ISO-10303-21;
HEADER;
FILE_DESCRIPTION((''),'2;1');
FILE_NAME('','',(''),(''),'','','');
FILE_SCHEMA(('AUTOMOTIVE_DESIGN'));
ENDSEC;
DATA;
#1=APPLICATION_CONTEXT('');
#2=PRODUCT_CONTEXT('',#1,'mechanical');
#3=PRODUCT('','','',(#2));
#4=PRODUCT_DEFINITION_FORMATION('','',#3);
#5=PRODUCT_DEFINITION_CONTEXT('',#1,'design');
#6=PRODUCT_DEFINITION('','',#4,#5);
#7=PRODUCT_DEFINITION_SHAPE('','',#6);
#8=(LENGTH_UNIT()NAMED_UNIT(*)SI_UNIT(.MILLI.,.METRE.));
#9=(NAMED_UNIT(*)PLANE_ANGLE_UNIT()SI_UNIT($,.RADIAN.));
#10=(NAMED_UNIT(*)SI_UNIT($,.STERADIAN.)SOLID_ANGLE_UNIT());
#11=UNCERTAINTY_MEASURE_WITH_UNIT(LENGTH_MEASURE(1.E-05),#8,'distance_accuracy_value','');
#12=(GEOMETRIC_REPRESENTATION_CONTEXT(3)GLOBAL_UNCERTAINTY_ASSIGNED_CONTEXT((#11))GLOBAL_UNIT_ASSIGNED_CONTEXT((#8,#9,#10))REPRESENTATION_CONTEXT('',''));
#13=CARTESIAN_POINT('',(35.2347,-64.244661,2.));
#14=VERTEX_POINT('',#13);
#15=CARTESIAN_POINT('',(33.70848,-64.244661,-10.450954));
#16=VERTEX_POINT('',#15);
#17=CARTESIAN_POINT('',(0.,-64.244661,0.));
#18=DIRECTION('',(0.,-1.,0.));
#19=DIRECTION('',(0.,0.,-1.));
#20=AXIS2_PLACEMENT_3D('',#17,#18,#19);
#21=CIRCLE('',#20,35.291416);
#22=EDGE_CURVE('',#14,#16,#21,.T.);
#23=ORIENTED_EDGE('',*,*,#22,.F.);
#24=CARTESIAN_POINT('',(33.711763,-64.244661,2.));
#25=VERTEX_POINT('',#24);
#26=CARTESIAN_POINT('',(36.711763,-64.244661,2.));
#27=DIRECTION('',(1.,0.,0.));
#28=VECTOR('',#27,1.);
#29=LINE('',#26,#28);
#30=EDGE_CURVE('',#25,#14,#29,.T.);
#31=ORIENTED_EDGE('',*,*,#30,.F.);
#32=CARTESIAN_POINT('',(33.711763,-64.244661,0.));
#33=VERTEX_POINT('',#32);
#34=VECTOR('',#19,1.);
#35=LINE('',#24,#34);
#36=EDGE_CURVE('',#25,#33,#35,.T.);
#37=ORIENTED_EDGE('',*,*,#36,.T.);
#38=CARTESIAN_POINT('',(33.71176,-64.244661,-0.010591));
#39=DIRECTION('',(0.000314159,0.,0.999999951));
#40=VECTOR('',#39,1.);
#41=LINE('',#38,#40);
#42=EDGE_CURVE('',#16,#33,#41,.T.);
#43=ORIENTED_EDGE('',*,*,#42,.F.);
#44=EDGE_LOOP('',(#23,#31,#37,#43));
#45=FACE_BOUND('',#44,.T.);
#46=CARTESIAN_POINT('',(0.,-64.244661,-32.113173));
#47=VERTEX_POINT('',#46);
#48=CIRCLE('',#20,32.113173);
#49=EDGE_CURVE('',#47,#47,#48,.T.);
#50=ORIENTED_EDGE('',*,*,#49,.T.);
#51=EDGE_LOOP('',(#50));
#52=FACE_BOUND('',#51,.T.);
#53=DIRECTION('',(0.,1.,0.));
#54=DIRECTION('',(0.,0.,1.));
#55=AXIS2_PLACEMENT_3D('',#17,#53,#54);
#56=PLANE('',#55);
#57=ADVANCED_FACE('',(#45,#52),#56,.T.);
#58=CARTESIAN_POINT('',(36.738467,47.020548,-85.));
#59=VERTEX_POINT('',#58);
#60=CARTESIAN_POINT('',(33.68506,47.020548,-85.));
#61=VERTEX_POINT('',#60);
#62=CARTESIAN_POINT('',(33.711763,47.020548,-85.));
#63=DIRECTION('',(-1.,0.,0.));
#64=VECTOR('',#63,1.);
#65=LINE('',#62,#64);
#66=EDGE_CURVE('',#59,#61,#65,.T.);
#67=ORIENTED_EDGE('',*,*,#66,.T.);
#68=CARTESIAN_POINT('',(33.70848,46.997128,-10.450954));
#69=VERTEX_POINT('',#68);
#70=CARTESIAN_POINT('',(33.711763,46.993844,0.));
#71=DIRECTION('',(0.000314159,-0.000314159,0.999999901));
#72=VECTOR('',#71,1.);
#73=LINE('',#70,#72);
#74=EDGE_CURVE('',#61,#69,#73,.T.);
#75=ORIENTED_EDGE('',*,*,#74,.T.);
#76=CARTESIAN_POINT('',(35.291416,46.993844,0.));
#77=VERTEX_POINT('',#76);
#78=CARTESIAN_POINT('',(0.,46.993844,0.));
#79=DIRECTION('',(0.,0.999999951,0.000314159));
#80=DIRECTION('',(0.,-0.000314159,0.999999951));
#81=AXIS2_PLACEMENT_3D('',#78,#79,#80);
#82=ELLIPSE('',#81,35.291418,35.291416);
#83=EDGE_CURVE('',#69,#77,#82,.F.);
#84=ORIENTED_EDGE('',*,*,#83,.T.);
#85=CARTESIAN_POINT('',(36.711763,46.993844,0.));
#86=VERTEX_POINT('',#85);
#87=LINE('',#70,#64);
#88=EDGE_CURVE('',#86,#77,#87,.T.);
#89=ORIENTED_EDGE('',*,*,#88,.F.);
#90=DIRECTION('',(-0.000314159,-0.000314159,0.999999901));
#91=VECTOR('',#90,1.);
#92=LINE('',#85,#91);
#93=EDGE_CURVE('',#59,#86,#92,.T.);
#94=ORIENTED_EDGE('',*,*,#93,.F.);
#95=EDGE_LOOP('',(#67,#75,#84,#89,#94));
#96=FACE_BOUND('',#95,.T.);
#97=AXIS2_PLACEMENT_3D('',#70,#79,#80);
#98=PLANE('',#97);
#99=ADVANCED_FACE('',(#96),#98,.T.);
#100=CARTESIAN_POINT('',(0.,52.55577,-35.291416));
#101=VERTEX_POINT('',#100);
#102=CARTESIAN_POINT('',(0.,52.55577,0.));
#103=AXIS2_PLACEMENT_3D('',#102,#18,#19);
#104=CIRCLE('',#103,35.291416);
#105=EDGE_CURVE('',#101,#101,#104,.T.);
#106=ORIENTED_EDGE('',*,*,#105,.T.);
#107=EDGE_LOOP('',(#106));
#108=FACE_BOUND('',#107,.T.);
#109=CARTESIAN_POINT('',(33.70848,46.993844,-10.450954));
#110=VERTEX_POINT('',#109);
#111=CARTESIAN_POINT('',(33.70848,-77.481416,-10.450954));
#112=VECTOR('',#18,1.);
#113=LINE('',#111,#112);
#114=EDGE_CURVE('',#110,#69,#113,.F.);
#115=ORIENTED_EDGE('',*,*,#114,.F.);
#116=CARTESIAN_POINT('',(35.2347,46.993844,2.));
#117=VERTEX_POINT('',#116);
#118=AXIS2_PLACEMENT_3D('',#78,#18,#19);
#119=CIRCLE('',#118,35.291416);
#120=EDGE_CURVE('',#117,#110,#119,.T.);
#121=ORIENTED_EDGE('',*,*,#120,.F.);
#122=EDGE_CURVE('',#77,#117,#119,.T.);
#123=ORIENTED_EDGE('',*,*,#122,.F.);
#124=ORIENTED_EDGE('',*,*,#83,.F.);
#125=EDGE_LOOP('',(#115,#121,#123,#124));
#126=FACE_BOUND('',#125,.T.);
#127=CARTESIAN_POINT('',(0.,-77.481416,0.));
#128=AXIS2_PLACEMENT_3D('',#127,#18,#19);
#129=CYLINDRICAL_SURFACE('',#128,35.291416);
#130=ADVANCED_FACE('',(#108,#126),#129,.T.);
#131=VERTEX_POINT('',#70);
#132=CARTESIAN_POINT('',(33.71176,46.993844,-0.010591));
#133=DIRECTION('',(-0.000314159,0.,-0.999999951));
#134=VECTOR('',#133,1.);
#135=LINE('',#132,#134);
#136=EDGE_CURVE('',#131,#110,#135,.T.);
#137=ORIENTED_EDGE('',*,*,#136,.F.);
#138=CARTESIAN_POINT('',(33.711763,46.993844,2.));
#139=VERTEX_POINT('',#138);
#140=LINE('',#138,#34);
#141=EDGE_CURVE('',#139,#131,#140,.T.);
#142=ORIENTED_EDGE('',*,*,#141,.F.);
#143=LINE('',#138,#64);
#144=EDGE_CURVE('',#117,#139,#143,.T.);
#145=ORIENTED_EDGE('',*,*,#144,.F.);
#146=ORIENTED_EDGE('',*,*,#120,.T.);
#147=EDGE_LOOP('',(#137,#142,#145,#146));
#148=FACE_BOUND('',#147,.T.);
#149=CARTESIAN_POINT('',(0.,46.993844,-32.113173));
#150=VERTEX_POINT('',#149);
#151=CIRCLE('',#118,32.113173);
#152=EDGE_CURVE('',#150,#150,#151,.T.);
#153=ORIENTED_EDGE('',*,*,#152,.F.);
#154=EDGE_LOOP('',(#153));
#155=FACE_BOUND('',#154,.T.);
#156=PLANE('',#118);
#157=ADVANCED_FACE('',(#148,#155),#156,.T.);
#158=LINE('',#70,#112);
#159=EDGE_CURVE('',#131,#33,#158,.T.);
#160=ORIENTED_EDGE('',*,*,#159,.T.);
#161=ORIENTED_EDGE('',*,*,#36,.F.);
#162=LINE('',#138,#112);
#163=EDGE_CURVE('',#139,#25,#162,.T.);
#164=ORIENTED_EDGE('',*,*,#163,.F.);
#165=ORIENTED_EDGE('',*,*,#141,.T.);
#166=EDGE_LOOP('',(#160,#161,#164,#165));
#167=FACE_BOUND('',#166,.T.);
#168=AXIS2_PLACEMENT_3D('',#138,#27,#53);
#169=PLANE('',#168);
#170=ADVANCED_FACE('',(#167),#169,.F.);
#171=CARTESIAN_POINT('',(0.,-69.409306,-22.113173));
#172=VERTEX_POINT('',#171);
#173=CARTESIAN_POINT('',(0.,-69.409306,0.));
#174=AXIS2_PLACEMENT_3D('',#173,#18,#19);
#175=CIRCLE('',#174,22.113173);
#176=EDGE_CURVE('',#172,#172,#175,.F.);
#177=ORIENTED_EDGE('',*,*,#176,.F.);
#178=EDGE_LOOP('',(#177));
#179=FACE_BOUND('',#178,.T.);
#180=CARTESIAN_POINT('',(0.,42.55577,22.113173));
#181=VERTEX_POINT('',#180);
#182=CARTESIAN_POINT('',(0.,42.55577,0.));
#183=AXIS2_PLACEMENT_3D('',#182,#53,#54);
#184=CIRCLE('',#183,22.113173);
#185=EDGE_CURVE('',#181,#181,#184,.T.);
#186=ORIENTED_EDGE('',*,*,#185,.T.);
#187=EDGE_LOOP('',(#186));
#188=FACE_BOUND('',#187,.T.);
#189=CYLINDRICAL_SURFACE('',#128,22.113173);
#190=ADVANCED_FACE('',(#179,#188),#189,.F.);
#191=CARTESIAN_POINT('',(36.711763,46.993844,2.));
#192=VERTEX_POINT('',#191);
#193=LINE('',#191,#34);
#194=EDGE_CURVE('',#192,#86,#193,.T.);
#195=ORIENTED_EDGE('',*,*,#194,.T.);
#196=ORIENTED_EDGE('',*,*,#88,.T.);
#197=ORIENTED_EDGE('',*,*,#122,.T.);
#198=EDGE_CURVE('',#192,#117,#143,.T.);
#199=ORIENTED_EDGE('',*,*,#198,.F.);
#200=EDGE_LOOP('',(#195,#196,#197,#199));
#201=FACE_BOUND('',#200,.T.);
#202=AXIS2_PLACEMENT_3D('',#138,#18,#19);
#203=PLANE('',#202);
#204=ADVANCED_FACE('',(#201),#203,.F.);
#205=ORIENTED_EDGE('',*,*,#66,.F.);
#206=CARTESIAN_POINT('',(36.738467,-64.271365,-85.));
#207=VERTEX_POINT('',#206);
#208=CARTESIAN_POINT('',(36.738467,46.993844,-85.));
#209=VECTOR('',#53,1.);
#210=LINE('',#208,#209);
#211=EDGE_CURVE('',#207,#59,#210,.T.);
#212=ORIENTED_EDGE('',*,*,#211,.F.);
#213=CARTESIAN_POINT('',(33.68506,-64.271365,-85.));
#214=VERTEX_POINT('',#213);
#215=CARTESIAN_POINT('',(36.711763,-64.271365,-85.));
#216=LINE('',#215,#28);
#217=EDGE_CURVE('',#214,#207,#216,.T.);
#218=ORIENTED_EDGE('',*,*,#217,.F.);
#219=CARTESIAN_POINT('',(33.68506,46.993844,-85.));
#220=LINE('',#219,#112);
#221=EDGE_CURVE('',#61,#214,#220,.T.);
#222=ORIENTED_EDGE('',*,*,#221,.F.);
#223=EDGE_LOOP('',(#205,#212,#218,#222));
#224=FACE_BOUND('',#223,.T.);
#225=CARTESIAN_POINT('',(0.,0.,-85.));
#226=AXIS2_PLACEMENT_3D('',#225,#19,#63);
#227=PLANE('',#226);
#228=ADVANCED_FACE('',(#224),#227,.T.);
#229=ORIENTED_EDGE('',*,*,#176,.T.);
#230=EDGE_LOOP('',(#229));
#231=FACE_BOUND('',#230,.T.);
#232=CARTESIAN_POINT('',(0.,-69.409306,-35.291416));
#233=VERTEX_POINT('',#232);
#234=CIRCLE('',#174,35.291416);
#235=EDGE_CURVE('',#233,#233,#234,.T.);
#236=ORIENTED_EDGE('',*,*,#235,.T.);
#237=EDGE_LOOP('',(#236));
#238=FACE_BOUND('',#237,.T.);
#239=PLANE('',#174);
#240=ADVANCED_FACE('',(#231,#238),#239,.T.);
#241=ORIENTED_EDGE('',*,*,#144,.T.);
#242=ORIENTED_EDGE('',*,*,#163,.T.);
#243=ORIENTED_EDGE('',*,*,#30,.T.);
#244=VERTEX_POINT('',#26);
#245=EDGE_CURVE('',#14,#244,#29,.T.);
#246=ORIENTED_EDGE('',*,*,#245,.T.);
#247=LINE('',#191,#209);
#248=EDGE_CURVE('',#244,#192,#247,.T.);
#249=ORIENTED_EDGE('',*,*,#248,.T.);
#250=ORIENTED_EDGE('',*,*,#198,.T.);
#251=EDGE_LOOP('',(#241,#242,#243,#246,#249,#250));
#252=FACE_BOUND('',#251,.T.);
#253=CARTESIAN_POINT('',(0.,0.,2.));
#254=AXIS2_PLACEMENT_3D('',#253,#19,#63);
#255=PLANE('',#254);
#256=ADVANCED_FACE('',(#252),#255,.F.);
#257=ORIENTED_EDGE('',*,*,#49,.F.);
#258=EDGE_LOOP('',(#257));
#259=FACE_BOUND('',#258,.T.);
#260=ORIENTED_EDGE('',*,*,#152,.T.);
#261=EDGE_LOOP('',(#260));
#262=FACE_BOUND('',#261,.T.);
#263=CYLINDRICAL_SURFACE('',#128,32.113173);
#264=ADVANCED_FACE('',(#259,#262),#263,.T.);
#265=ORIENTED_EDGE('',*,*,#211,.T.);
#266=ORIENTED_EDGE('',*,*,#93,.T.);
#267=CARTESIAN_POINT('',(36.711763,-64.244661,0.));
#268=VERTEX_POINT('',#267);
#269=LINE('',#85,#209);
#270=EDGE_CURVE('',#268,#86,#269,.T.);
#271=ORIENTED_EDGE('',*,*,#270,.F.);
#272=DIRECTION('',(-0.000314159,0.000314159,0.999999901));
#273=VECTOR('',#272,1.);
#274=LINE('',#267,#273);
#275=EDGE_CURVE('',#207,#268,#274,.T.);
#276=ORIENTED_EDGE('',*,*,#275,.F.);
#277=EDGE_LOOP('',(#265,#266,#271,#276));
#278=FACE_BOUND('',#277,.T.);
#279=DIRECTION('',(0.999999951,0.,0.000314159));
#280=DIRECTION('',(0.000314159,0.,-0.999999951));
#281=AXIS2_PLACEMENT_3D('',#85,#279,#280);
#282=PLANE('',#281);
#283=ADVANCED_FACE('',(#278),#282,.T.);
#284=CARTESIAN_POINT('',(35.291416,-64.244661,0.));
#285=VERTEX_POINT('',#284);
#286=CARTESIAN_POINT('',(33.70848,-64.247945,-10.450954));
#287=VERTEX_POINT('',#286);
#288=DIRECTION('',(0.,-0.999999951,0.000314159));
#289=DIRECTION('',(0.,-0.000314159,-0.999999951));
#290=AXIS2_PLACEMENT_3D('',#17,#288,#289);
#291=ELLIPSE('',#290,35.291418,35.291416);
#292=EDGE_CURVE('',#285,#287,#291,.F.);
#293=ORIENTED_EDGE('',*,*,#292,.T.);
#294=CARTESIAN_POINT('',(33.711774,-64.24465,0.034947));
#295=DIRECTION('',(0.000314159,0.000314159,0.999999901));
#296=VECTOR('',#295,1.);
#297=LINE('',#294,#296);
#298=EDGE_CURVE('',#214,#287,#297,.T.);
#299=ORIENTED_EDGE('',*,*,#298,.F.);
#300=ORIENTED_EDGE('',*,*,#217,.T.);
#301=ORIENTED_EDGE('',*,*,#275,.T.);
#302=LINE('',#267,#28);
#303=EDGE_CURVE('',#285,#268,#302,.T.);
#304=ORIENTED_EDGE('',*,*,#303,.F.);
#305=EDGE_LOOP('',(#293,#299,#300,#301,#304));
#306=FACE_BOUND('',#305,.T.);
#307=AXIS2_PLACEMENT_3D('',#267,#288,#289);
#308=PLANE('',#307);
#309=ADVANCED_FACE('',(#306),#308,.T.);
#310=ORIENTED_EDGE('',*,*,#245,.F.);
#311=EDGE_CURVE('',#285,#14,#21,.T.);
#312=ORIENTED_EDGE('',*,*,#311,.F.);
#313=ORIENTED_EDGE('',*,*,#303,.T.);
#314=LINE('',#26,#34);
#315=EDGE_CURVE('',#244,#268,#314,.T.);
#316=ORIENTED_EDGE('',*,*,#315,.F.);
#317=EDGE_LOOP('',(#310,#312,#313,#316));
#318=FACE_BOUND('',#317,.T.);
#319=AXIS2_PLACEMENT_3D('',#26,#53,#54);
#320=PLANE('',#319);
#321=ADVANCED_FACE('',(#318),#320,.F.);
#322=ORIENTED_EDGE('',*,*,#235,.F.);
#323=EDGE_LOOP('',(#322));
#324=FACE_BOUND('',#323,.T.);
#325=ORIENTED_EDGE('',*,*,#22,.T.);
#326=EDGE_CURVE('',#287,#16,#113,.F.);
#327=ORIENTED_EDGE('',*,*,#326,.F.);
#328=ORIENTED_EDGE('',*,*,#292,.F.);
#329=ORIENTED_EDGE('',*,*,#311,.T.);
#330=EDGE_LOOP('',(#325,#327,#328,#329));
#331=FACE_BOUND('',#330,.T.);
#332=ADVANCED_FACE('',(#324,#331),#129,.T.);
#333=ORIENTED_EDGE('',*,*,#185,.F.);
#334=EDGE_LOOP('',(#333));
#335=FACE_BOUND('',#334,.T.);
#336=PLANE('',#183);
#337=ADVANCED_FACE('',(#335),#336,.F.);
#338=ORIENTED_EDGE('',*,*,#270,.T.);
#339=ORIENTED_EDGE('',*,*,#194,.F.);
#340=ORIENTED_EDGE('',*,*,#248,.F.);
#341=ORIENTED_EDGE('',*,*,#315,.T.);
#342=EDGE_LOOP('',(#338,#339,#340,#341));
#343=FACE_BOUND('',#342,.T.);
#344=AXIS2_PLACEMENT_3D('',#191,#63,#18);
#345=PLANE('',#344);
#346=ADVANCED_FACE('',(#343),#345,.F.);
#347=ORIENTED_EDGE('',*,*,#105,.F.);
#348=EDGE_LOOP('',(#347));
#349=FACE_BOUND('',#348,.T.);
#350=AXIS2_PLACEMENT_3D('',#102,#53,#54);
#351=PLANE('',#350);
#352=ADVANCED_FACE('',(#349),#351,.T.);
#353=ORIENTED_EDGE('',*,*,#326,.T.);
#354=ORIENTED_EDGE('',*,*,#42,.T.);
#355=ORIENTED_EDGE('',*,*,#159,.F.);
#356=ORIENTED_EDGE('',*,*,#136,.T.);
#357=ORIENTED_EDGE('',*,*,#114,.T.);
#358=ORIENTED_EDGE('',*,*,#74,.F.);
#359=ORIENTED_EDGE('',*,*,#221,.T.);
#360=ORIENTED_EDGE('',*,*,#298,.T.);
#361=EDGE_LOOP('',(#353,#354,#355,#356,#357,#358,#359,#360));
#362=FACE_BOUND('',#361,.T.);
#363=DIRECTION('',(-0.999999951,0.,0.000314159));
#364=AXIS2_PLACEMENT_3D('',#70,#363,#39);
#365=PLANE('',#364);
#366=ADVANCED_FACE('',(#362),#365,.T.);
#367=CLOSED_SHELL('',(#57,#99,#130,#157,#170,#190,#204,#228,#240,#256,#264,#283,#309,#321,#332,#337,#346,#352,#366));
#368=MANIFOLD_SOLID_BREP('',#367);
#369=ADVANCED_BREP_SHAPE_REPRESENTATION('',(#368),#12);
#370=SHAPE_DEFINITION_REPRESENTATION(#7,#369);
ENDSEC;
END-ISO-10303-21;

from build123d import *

# Parameters (mm, degrees)
VACIADO1_START                    = -69.409306307
VACIADO1_OUTLINE_R                = 22.113173388
VACIADO1_DEPTH                    = 111.965075994
CROQUIS3_W                        = 3
CROQUIS3_H                        = 111.238505794
SALIENTE_EXTRUIR1_DEPTH           = 85
SALIENTE_EXTRUIR1_TAPER           = -0.018
SALIENTE_EXTRUIR1_OTHER_WAY_DEPTH = 2


# Read off the part's stored shape, not the designer's step: Vaciado1
with BuildPart() as part:
    # Croquis1 → Revolución1 (revolve)
    with BuildSketch(Plane.XY, mode=Mode.PRIVATE) as revoluci_n1_sk:
        Polygon((0, 52.555769687), (0, 46.993844398), (0, -69.409306307), (35.29141641, -69.409306307), (35.29141641, -64.244661396), (32.113173388, -64.244661396), (32.113173388, 46.993844398), (35.29141641, 46.993844398), (35.29141641, 52.555769687), align=None)
    revolve(revoluci_n1_sk.sketch.rotate(Axis((0, -77.4814163, 0), (0, 1, 0)), 90), axis=Axis((0, -77.4814163, 0), (0, 1, 0)))

    # Vaciado1 outline → Vaciado1 (cut)
    with BuildSketch(Plane(origin=(0, 0, 0), x_dir=(1, 0, 0), z_dir=(0, 1, 0)).offset(VACIADO1_START)):
        Circle(VACIADO1_OUTLINE_R)
    extrude(amount=VACIADO1_DEPTH, mode=Mode.SUBTRACT)

    # Croquis3 → Saliente-Extruir1 (add)
    with BuildSketch(Plane(origin=(35.21176327, 0, 0), x_dir=(1, 0, 0), z_dir=(0, 0, 1))):
        with Locations((0, -8.625408499)):
            Rectangle(CROQUIS3_W, CROQUIS3_H)
    extrude(amount=-SALIENTE_EXTRUIR1_DEPTH, taper=SALIENTE_EXTRUIR1_TAPER)

    # Croquis3 → Saliente-Extruir1 other way (add)
    with BuildSketch(Plane(origin=(35.21176327, 0, 0), x_dir=(1, 0, 0), z_dir=(0, 0, 1))):
        with Locations((0, -8.625408499)):
            Rectangle(CROQUIS3_W, CROQUIS3_H)
    extrude(amount=SALIENTE_EXTRUIR1_OTHER_WAY_DEPTH)


solid = part.part
